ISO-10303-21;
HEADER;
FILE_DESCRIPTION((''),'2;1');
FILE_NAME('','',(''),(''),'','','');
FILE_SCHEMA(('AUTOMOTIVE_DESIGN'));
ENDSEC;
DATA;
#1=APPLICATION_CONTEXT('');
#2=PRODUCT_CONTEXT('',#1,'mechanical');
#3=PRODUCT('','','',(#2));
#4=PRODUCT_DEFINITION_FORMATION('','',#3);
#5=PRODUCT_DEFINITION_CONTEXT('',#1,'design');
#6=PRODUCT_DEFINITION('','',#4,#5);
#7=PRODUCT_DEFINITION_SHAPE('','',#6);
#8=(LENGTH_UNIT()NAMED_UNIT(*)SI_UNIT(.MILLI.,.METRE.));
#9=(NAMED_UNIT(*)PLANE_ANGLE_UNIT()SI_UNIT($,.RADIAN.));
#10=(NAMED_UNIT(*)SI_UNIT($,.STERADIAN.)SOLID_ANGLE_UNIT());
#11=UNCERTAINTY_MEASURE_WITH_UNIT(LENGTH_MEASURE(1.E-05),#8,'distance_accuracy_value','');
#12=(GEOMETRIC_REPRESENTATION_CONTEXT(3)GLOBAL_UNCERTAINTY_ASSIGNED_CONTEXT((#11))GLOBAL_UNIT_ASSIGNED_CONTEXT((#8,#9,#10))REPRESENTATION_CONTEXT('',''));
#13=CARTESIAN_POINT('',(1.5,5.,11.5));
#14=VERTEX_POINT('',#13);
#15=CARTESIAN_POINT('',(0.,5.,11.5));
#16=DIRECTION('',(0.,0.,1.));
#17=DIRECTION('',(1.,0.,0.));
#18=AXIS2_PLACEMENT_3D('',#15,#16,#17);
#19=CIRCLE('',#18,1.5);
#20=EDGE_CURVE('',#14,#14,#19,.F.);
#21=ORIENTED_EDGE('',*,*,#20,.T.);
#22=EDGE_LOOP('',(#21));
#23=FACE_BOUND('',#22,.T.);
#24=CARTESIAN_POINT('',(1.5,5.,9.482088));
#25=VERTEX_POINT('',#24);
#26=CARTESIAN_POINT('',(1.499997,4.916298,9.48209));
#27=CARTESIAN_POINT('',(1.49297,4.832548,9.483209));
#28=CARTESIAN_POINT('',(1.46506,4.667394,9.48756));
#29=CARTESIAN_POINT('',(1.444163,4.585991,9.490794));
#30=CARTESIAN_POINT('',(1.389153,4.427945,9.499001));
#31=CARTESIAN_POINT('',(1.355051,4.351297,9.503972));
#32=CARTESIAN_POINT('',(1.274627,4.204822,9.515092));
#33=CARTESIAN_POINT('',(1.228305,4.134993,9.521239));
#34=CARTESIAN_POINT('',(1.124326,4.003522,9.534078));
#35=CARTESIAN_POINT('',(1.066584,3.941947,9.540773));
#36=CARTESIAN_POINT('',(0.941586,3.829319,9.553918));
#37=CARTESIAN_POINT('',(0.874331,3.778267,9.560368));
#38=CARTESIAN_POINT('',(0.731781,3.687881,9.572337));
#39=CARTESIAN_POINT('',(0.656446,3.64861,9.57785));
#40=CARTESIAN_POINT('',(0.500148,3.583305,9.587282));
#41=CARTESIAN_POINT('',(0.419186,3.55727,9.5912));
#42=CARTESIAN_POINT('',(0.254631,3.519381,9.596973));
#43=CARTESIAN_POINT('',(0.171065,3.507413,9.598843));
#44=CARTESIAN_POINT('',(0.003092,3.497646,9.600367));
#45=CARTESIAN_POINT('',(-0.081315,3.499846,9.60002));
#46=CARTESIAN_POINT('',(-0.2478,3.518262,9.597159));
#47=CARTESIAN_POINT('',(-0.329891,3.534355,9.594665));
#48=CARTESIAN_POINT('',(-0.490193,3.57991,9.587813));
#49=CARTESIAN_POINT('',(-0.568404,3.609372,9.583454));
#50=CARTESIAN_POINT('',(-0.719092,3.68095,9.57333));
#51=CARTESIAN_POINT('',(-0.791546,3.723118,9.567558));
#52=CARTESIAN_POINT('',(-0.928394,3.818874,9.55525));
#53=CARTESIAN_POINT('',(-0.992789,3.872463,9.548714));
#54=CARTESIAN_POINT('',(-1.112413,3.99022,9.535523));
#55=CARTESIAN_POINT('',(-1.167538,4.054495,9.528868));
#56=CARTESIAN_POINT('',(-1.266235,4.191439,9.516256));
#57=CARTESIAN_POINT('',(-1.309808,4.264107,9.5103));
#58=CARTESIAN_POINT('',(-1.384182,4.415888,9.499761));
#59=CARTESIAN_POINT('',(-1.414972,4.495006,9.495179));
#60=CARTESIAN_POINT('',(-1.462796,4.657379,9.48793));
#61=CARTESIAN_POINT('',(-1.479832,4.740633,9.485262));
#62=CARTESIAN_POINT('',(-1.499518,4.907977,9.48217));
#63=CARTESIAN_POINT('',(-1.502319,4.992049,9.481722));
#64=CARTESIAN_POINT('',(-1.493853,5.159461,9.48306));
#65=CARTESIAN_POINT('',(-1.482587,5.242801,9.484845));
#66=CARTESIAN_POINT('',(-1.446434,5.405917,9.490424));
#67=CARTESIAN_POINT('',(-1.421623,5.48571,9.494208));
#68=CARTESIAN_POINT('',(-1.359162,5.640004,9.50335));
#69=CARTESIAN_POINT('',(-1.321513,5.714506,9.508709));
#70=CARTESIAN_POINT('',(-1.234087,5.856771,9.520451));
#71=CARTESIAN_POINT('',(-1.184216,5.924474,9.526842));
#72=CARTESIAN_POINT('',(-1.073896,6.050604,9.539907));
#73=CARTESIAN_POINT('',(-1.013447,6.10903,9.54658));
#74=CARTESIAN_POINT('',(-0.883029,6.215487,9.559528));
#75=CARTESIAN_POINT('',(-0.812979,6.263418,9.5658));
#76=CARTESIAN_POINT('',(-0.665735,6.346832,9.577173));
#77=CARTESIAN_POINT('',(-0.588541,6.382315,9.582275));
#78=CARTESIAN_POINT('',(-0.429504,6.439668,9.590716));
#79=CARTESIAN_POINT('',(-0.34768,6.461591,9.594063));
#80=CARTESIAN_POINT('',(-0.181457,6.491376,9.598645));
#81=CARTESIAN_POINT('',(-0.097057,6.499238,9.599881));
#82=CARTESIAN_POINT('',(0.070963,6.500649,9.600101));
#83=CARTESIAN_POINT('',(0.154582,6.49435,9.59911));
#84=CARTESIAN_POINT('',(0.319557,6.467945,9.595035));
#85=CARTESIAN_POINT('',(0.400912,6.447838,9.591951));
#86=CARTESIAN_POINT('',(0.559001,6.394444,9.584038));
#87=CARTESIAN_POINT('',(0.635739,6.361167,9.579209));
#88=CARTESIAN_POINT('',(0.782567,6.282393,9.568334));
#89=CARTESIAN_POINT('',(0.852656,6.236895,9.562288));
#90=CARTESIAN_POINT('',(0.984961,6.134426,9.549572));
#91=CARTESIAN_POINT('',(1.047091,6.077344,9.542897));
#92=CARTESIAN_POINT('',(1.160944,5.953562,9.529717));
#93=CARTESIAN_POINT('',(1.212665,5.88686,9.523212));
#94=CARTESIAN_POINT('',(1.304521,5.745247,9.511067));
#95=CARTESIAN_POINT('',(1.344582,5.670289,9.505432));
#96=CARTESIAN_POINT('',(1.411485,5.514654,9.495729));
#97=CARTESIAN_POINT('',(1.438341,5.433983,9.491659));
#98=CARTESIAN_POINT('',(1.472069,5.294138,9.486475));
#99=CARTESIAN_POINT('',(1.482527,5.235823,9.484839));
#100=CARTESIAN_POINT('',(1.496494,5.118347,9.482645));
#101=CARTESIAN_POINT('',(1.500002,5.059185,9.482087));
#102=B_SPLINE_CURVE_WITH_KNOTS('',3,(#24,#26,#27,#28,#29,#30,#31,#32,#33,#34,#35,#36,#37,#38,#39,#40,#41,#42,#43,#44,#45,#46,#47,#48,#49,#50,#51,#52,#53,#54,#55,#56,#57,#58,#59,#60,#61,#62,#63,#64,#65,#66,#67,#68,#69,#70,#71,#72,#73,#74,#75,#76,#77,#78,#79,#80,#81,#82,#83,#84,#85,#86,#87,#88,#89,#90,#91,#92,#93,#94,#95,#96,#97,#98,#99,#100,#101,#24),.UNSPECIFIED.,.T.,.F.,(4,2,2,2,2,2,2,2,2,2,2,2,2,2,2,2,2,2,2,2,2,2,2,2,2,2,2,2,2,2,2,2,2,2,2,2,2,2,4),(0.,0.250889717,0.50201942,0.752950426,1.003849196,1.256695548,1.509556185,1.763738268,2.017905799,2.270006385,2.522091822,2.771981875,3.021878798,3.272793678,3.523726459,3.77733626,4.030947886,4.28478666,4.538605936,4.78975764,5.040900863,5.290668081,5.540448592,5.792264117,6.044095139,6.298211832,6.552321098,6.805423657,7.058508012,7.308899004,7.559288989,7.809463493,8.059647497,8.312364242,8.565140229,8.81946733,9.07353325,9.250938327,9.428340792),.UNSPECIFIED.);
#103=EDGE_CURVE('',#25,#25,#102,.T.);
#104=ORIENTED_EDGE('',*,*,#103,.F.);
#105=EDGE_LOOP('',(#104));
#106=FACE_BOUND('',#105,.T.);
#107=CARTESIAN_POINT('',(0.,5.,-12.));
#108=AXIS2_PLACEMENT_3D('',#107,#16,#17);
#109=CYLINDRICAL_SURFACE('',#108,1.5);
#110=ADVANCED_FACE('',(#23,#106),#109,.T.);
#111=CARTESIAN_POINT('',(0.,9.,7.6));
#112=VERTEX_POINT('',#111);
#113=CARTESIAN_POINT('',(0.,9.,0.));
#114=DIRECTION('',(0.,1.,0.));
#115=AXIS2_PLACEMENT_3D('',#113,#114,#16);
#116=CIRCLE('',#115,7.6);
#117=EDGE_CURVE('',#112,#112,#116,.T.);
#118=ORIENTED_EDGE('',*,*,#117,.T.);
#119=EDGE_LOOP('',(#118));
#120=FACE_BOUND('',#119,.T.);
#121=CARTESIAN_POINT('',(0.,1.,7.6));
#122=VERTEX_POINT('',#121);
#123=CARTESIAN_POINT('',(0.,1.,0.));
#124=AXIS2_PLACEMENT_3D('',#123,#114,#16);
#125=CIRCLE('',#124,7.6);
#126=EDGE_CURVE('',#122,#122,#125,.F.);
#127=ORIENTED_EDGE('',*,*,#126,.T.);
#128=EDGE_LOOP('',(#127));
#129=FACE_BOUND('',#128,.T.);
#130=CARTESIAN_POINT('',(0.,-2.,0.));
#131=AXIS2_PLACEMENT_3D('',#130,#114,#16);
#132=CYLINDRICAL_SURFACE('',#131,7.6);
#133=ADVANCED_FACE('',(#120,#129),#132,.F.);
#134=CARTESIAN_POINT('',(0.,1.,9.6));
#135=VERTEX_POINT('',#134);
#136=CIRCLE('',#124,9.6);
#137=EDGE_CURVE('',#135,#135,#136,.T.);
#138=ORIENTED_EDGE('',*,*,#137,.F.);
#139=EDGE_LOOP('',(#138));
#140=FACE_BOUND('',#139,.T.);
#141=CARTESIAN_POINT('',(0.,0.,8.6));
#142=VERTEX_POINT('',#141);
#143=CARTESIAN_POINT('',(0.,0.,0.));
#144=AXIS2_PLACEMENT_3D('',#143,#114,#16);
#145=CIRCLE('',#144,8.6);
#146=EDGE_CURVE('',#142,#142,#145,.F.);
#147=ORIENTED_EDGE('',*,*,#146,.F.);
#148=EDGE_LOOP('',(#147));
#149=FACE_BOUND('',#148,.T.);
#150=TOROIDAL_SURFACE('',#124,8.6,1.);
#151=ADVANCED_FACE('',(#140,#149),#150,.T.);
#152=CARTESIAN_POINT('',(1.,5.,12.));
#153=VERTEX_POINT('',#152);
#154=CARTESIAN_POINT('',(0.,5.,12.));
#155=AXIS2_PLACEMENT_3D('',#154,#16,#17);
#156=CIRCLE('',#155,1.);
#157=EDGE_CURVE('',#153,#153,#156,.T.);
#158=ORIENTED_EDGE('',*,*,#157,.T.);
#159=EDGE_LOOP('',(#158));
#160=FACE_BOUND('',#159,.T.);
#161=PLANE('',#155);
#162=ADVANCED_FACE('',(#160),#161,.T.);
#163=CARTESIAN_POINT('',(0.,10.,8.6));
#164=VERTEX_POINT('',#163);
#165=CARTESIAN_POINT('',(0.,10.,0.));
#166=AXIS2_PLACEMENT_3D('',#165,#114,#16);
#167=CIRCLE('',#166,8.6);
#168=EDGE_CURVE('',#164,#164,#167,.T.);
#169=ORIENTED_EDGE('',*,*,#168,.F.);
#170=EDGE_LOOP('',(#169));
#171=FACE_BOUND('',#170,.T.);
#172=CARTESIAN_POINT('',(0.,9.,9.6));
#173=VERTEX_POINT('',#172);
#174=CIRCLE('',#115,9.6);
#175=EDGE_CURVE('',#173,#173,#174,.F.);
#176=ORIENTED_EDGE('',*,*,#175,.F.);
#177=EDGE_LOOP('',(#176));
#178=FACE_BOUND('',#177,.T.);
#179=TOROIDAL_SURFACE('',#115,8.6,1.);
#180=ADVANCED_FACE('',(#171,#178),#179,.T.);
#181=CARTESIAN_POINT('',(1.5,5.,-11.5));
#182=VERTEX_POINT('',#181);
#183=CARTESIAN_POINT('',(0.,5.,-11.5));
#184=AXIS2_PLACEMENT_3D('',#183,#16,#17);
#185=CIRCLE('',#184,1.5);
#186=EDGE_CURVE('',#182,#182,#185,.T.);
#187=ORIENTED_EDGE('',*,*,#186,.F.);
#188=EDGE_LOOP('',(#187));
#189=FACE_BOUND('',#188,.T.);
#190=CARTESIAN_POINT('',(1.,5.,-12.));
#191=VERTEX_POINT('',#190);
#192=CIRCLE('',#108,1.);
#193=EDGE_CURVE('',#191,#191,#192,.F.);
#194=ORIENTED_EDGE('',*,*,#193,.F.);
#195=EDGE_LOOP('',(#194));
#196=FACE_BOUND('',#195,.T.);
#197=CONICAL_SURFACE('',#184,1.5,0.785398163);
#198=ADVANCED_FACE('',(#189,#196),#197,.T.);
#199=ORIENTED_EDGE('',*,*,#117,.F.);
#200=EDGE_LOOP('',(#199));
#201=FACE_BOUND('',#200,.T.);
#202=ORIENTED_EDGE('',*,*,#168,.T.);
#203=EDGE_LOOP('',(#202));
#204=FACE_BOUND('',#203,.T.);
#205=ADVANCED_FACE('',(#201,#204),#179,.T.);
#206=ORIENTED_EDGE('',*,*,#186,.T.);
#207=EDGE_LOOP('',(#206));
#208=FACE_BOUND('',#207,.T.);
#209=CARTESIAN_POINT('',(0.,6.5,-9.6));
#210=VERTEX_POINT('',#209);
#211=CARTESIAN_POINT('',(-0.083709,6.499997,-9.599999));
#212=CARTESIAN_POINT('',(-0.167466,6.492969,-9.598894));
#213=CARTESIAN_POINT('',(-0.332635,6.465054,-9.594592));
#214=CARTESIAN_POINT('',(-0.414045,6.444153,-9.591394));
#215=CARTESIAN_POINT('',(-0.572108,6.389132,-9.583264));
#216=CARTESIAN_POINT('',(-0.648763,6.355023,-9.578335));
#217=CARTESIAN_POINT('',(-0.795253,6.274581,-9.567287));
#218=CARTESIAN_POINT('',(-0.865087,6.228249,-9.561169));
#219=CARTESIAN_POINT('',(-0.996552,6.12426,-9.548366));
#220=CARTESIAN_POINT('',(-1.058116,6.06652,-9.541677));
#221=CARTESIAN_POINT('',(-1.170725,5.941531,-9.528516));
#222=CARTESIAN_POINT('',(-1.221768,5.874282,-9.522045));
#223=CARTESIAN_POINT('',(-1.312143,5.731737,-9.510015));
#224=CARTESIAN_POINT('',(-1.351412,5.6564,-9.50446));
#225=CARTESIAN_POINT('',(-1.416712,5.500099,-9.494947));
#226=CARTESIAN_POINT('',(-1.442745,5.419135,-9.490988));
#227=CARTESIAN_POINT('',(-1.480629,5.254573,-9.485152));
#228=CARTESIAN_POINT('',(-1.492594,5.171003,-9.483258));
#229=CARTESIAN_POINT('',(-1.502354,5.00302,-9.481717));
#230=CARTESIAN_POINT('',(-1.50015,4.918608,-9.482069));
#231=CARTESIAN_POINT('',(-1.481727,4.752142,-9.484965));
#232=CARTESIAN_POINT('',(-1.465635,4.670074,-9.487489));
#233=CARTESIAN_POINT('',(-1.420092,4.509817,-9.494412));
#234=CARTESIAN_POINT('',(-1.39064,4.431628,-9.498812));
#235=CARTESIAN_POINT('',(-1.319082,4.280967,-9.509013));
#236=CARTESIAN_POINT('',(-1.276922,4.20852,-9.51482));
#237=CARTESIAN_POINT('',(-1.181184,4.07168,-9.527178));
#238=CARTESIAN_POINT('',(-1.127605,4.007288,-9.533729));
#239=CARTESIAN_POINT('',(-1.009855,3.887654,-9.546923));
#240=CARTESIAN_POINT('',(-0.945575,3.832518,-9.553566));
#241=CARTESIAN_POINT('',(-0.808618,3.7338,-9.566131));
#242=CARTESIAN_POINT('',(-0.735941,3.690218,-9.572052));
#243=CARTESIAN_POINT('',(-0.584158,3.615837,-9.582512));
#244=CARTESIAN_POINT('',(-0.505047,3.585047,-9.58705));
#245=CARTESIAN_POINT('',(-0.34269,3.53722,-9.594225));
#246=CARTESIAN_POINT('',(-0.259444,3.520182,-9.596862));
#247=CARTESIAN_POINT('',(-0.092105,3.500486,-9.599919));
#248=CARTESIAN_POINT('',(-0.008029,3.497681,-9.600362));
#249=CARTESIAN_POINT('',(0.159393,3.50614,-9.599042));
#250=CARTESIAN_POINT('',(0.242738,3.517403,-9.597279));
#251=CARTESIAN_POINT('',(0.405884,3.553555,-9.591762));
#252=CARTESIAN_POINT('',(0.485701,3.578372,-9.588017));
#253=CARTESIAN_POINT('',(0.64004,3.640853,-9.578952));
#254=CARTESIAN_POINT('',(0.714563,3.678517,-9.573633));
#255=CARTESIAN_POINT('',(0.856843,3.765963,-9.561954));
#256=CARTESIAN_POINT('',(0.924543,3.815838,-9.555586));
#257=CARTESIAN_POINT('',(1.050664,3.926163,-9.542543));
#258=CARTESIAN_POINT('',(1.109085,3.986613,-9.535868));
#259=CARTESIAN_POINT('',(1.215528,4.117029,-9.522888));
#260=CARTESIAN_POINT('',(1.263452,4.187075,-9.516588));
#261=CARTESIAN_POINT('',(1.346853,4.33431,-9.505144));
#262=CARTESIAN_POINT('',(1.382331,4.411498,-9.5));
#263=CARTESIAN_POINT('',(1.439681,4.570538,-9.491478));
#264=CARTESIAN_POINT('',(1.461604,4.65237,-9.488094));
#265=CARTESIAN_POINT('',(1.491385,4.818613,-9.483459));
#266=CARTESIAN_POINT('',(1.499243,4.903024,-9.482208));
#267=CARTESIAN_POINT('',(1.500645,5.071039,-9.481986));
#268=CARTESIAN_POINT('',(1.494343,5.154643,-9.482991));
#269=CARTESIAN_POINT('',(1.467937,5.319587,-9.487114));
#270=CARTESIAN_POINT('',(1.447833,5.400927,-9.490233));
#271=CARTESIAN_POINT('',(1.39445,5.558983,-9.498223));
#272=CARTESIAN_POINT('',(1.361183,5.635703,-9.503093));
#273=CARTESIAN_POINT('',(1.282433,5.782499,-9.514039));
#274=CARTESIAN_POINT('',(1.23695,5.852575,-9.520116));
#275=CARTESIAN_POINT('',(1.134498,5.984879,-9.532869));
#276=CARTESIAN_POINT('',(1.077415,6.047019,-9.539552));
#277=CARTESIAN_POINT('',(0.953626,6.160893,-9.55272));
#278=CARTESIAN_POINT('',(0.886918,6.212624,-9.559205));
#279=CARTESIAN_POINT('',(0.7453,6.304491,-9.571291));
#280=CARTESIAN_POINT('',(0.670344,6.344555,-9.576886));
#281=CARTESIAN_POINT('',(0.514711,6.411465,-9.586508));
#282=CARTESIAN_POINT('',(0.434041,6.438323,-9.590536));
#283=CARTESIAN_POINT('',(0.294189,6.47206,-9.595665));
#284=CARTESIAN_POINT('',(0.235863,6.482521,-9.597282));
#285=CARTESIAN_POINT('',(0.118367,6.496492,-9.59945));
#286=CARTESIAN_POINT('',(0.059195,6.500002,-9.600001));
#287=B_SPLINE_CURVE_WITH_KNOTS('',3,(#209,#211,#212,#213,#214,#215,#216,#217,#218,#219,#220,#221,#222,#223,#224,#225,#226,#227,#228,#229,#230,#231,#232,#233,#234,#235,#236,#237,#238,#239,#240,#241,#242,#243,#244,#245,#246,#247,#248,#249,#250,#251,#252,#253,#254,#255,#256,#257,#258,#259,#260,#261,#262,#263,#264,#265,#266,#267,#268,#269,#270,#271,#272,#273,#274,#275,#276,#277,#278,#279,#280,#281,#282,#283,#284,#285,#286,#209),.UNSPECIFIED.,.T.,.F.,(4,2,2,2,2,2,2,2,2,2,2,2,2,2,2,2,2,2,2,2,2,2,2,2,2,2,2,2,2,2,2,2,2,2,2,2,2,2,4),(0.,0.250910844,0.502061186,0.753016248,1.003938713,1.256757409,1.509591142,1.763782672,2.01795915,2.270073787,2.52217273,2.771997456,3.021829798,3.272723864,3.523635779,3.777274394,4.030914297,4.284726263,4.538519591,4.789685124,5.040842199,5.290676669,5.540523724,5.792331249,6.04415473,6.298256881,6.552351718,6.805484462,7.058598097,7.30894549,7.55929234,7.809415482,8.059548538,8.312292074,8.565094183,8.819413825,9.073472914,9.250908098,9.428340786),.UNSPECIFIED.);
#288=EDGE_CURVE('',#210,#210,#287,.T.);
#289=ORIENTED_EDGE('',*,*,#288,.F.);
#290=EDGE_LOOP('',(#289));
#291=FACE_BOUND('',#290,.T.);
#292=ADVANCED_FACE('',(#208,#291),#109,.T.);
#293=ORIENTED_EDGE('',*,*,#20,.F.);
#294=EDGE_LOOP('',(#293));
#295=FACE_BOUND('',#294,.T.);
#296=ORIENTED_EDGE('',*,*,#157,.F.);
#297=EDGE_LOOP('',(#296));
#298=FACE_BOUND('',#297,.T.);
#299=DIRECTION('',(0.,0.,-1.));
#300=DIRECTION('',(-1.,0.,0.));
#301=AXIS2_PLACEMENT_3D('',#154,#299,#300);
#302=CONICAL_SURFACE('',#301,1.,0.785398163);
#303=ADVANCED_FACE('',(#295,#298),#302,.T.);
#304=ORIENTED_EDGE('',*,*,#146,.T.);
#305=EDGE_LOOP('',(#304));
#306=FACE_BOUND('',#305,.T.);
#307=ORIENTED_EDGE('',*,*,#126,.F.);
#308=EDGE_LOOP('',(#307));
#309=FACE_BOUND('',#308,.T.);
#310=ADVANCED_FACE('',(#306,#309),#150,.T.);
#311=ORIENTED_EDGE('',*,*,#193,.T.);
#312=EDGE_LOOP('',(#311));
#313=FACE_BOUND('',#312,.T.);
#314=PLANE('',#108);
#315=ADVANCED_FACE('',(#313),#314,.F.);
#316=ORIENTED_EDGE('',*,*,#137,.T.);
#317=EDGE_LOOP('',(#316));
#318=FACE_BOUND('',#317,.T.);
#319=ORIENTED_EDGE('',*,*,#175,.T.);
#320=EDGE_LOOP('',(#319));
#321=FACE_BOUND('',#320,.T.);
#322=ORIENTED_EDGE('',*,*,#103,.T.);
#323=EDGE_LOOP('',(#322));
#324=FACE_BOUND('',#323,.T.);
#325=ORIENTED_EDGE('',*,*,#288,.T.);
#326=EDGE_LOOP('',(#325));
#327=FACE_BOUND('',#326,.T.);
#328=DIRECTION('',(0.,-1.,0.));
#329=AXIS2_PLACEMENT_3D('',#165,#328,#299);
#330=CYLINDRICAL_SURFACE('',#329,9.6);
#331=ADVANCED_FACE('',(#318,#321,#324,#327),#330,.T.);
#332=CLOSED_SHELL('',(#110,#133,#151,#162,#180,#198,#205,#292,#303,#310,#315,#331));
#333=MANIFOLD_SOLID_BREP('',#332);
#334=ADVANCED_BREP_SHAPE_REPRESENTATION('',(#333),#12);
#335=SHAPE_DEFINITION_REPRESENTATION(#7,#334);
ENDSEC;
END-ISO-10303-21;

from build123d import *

# Parameters (mm, degrees)
SKETCH1_R                = 9.6
BOSS_EXTRUDE1_DEPTH      = 10
BOSS_EXTRUDE2_DEPTH      = 12
BOSS_EXTRUDE2_DEPTH_BACK = 12
SKETCH2_R                = 1.5
SKETCH3_R                = 7.6
CUT_EXTRUDE1_DEPTH       = 12
FILLET1_R                = 1
CHAMFER1_SIZE            = 0.5


with BuildPart() as part:
    # Sketch1 → Boss-Extrude1 (new body)
    with BuildSketch(Plane(origin=(0, 0, 0), x_dir=(1, 0, 0), z_dir=(0, 1, 0))):
        with Locations(Location((0, 0, 0), (0, 0, 270))):
            Circle(SKETCH1_R)
    extrude(amount=BOSS_EXTRUDE1_DEPTH)

    # Sketch2 → Boss-Extrude2 (add, two sides: drawn at the far end of the back side and taken through both)
    with BuildSketch(Plane.XY.offset(-BOSS_EXTRUDE2_DEPTH_BACK)):
        with Locations((0, 5)):
            Circle(SKETCH2_R)
    extrude(amount=BOSS_EXTRUDE2_DEPTH + BOSS_EXTRUDE2_DEPTH_BACK)

    # Sketch3 → Cut-Extrude1 (cut)
    with BuildSketch(Plane(origin=(0, 10, 0), x_dir=(1, 0, 0), z_dir=(0, 1, 0))):
        with Locations(Location((0, 0, 0), (0, 0, 270))):
            Circle(SKETCH3_R)
    extrude(amount=-CUT_EXTRUDE1_DEPTH, mode=Mode.SUBTRACT)

    # Fillet1
    fillet1_edges = [part.edges().sort_by_distance(p)[0] for p in [
        (0, 0, -7.6),
        (0, 10, -7.6),
        (0, 0, -9.6),
        (0, 10, -9.6),
    ]]
    fillet(fillet1_edges, radius=FILLET1_R - 0.0001)  # a hair under: the kernel refuses the full size

    # Chamfer1
    chamfer1_edges = [part.edges().sort_by_distance(p)[0] for p in [
        (-1.5, 5, -12),
        (-1.5, 5, 12),
    ]]
    chamfer(chamfer1_edges, length=CHAMFER1_SIZE)


solid = part.part
